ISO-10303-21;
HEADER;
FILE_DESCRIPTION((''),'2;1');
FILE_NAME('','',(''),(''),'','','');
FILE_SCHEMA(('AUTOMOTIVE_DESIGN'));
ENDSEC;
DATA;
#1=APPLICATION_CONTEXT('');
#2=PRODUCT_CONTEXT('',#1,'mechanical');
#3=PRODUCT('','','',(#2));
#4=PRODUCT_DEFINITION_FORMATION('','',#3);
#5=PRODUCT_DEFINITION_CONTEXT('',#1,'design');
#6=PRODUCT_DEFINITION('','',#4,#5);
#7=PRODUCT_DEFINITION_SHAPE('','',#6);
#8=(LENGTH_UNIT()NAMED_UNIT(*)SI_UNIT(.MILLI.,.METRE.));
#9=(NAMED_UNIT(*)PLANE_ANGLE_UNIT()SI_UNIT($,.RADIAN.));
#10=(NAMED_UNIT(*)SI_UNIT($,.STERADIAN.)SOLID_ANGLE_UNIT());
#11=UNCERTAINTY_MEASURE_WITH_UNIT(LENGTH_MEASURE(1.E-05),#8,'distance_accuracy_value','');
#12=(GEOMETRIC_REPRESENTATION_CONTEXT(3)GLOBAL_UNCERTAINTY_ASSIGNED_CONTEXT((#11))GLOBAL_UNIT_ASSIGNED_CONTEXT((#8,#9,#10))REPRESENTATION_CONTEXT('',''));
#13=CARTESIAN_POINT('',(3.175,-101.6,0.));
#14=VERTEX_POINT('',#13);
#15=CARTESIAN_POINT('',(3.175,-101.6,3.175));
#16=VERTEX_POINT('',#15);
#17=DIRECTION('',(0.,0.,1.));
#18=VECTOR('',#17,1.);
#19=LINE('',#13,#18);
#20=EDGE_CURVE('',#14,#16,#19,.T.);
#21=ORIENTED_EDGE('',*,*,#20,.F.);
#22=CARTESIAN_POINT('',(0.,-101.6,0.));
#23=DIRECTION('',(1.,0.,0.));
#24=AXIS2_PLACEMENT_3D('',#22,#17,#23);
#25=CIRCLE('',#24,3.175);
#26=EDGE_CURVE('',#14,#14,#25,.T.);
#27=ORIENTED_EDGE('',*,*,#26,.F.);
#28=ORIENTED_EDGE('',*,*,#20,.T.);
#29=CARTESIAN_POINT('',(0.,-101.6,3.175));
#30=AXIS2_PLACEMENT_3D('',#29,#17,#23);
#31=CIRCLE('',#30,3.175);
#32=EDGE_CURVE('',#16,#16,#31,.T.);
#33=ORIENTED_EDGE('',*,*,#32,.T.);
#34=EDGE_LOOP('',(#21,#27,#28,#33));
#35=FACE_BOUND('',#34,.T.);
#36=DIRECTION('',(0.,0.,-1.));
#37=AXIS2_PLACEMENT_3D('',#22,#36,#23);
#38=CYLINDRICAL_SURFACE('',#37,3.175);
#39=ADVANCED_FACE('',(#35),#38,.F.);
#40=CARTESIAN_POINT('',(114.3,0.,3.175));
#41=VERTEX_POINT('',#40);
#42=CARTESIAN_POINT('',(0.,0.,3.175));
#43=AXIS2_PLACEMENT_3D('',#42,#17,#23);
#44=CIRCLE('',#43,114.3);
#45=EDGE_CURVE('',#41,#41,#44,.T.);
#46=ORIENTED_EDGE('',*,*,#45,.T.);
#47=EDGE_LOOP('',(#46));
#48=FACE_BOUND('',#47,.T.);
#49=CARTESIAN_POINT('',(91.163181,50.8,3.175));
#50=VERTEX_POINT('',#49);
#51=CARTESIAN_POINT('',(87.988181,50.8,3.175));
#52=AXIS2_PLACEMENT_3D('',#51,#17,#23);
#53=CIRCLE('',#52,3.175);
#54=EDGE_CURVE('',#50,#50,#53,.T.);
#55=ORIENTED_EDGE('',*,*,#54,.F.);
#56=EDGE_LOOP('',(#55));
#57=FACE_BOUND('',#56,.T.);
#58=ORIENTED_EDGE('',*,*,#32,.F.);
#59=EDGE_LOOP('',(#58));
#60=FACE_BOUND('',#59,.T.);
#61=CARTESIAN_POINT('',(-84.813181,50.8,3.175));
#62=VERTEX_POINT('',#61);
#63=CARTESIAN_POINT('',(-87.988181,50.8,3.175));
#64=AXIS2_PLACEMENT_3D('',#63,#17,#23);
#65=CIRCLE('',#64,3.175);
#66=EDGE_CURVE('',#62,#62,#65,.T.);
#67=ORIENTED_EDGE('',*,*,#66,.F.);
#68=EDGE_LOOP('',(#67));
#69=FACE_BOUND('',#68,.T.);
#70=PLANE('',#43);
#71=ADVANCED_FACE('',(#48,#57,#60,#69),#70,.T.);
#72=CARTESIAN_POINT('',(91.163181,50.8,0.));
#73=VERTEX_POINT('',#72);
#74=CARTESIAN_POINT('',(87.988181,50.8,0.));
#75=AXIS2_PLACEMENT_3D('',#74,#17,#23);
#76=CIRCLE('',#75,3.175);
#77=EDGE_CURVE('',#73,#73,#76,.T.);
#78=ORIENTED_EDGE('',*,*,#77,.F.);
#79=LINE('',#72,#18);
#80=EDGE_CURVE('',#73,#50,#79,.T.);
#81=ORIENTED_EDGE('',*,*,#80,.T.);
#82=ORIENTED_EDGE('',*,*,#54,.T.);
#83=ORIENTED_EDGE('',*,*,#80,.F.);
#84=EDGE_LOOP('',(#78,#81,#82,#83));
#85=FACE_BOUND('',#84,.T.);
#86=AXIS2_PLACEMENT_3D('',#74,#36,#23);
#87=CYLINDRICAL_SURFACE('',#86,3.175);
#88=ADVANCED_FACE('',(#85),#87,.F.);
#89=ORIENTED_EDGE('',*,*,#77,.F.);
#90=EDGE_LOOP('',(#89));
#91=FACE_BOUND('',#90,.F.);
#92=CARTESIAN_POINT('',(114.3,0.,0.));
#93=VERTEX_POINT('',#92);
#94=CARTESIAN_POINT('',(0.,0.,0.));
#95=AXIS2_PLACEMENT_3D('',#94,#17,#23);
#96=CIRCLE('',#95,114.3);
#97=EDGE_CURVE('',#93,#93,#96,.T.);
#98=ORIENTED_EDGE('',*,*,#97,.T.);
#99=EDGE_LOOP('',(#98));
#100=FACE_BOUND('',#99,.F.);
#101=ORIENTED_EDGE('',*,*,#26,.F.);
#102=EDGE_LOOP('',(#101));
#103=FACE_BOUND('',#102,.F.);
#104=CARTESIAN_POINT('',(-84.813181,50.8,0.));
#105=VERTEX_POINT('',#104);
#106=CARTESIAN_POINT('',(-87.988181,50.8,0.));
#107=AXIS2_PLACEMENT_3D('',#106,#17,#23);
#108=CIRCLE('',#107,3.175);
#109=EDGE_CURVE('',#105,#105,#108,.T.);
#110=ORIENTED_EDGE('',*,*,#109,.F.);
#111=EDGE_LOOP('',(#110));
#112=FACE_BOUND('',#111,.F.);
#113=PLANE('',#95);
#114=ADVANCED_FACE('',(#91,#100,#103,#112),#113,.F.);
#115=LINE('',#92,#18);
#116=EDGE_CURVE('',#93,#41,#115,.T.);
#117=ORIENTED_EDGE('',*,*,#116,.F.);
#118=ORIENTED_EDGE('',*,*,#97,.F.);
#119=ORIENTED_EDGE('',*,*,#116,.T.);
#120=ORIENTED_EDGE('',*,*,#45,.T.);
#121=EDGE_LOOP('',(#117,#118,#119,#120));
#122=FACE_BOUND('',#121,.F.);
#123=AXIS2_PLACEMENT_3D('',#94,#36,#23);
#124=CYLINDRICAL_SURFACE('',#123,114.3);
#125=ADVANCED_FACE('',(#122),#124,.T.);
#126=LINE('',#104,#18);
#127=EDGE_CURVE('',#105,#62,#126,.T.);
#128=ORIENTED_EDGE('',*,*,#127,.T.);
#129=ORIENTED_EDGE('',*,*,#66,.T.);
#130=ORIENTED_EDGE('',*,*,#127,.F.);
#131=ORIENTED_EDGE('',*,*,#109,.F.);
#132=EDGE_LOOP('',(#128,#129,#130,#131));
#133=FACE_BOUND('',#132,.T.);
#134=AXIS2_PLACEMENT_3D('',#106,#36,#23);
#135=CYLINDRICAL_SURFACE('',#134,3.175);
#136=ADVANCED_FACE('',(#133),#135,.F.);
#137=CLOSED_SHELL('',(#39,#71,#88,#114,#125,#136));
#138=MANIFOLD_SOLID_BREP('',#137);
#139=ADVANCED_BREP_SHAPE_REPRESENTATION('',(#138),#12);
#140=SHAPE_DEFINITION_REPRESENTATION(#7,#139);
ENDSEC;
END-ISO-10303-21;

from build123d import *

# Parameters (mm, degrees)
F0_R     = 114.3
F0_R_2   = 3.175
F1_DEPTH = 3.175


# Not quite as in the source:
# - a feature names something its author has since deleted; it is built from what else it names


with BuildPart() as f1:
    # F0 (on Top) → F1 (new body)
    with BuildSketch(Plane.XY):
        Circle(F0_R)
        with Locations((0, -101.6)):
            Circle(F0_R_2, mode=Mode.SUBTRACT)
        with Locations((-87.9881810245, 50.8)):
            Circle(F0_R_2, mode=Mode.SUBTRACT)
        with Locations((87.9881810245, 50.8)):
            Circle(F0_R_2, mode=Mode.SUBTRACT)
    extrude(amount=F1_DEPTH)


solid = f1.part
